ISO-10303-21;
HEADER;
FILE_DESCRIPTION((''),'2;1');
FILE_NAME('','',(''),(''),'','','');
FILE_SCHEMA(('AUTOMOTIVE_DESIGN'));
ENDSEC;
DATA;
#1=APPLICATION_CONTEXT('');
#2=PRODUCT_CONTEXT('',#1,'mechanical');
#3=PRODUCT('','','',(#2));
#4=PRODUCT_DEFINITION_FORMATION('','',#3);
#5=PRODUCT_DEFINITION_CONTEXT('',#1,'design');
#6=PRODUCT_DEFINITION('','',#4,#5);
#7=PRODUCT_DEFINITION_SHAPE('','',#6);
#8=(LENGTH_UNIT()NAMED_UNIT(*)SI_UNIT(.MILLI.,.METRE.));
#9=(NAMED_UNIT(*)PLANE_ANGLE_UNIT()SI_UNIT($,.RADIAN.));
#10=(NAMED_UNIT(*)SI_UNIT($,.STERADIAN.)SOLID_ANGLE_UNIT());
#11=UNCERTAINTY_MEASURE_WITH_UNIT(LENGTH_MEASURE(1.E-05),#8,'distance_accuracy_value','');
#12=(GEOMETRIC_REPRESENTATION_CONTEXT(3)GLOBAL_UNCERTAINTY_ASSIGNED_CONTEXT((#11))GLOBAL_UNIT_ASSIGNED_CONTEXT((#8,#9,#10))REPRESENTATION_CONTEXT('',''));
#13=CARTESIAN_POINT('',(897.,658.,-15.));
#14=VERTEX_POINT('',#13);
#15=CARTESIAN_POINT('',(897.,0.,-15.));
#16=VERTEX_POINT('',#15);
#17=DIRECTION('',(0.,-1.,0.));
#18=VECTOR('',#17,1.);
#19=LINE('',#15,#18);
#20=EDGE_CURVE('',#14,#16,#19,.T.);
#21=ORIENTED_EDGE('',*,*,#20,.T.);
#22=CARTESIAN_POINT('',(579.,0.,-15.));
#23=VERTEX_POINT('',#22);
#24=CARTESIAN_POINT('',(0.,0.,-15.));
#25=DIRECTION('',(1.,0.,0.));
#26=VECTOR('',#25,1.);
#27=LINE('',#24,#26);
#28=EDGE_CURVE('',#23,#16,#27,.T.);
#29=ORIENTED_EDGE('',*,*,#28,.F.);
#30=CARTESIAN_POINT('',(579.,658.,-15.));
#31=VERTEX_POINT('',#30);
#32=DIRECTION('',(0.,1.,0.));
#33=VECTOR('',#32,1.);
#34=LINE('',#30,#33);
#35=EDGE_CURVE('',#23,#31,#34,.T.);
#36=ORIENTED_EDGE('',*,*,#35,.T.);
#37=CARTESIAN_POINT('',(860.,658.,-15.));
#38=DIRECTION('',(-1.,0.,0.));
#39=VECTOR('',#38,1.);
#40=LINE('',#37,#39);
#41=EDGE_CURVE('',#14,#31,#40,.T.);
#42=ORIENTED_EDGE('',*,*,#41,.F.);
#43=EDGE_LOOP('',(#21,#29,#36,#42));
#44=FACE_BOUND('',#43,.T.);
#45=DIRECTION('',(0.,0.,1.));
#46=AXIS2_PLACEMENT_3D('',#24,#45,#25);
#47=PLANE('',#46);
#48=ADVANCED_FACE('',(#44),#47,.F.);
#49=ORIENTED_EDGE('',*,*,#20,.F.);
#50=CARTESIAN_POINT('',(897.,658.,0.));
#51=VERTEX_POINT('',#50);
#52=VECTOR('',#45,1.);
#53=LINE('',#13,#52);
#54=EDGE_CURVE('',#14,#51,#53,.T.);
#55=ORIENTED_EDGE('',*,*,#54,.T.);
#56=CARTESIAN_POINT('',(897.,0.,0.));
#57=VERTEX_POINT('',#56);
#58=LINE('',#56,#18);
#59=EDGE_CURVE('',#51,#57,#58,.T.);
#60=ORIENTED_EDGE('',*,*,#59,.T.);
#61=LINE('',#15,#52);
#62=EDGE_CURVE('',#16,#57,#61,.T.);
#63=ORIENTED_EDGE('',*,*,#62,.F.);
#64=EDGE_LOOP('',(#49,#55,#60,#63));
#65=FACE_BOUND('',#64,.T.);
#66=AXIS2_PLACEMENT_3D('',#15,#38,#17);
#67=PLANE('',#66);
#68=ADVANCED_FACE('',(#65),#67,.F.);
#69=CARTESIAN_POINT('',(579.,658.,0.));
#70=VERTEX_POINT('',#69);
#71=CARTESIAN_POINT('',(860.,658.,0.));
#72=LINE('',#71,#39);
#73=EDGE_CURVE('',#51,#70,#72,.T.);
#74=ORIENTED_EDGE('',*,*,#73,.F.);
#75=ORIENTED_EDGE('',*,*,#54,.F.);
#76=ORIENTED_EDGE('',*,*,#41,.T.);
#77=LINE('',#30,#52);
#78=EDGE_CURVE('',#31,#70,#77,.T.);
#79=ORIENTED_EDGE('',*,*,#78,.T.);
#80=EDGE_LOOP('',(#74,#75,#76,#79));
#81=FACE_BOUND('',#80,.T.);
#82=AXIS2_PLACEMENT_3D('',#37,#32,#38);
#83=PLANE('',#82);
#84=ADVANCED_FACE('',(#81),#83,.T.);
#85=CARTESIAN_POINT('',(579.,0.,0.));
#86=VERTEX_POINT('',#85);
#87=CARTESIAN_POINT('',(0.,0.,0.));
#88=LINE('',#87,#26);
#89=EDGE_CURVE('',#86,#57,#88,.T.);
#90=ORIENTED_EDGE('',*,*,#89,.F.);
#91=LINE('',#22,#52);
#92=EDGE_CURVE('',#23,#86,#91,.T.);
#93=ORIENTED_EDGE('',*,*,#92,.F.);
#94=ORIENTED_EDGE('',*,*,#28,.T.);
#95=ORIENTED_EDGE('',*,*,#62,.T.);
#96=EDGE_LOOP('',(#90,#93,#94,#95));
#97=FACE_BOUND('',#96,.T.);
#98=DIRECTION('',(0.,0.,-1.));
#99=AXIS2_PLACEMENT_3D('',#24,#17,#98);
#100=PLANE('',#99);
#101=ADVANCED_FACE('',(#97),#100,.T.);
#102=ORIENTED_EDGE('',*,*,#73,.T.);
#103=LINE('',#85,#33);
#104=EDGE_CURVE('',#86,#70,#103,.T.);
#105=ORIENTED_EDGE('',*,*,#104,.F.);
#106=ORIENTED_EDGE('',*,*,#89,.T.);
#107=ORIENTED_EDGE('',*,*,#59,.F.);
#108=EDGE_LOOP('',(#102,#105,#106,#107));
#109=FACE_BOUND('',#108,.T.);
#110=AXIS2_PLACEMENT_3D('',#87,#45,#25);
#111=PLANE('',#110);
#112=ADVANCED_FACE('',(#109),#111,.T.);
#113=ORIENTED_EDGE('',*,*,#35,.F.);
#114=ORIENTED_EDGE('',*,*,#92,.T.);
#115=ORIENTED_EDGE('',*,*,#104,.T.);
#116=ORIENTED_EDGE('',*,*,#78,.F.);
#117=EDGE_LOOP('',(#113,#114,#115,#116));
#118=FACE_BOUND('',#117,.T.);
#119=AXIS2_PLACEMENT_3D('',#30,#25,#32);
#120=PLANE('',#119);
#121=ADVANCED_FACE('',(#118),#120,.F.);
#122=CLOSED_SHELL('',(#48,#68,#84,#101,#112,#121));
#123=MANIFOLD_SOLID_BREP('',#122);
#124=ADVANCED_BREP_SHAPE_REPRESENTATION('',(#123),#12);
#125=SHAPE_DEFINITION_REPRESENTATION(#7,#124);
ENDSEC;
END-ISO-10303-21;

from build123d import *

# Parameters (mm, degrees)
TABAN_FLAN_1_DEPTH         = 15
KES_EKSTR_ZYON1_DEPTH      = 2129.448495971
KES_EKSTR_ZYON1_DEPTH_BACK = 2129.448495971
IZIM3_W                    = 642
IZIM3_H                    = 505
KES_EKSTR_ZYON2_DEPTH      = 1807.166658977
KES_EKSTR_ZYON2_DEPTH_BACK = 1807.166658977
IZIM4_W                    = 37
IZIM4_H                    = 345
IZIM4_W_2                  = 7
IZIM4_H_2                  = 658
KES_EKSTR_ZYON3_DEPTH      = 1113.563706041
KES_EKSTR_ZYON3_DEPTH_BACK = 1113.563706041
IZIM5_W                    = 572
IZIM5_H                    = 658


# Sheet-metal steps are written as plain solids
with BuildPart() as part:
    # Çizim1 → Taban-Flanş1 (new body)
    with BuildSketch(Plane.XY):
        Polygon((0, 0), (1502, 0), (1502, 1508), (860, 1508), (860, 658), (0, 658), align=None)
    extrude(amount=-TABAN_FLAN_1_DEPTH)

    # Çizim3 → Kes-Ekstrüzyon1 (cut, two sides: drawn at the far end of the back side and taken through both)
    with BuildSketch(Plane.XY.offset(-KES_EKSTR_ZYON1_DEPTH_BACK)):
        with Locations((1181, 1255.5)):
            Rectangle(IZIM3_W, IZIM3_H)
    extrude(amount=KES_EKSTR_ZYON1_DEPTH + KES_EKSTR_ZYON1_DEPTH_BACK, mode=Mode.SUBTRACT)

    # Çizim4 → Kes-Ekstrüzyon2 (cut, two sides: drawn at the far end of the back side and taken through both)
    with BuildSketch(Plane.XY.offset(-KES_EKSTR_ZYON2_DEPTH_BACK)):
        Polygon((1502, 0), (1502, 1003), (897, 1003), (897, 658), (897, 0), align=None)
        with Locations((878.5, 830.5)):
            Rectangle(IZIM4_W, IZIM4_H)
        with Locations((3.5, 329)):
            Rectangle(IZIM4_W_2, IZIM4_H_2)
    extrude(amount=KES_EKSTR_ZYON2_DEPTH + KES_EKSTR_ZYON2_DEPTH_BACK, mode=Mode.SUBTRACT)

    # Çizim5 → Kes-Ekstrüzyon3 (cut, two sides: drawn at the far end of the back side and taken through both)
    with BuildSketch(Plane.XY.offset(-KES_EKSTR_ZYON3_DEPTH_BACK)):
        with Locations((293, 329)):
            Rectangle(IZIM5_W, IZIM5_H)
    extrude(amount=KES_EKSTR_ZYON3_DEPTH + KES_EKSTR_ZYON3_DEPTH_BACK, mode=Mode.SUBTRACT)


solid = part.part
